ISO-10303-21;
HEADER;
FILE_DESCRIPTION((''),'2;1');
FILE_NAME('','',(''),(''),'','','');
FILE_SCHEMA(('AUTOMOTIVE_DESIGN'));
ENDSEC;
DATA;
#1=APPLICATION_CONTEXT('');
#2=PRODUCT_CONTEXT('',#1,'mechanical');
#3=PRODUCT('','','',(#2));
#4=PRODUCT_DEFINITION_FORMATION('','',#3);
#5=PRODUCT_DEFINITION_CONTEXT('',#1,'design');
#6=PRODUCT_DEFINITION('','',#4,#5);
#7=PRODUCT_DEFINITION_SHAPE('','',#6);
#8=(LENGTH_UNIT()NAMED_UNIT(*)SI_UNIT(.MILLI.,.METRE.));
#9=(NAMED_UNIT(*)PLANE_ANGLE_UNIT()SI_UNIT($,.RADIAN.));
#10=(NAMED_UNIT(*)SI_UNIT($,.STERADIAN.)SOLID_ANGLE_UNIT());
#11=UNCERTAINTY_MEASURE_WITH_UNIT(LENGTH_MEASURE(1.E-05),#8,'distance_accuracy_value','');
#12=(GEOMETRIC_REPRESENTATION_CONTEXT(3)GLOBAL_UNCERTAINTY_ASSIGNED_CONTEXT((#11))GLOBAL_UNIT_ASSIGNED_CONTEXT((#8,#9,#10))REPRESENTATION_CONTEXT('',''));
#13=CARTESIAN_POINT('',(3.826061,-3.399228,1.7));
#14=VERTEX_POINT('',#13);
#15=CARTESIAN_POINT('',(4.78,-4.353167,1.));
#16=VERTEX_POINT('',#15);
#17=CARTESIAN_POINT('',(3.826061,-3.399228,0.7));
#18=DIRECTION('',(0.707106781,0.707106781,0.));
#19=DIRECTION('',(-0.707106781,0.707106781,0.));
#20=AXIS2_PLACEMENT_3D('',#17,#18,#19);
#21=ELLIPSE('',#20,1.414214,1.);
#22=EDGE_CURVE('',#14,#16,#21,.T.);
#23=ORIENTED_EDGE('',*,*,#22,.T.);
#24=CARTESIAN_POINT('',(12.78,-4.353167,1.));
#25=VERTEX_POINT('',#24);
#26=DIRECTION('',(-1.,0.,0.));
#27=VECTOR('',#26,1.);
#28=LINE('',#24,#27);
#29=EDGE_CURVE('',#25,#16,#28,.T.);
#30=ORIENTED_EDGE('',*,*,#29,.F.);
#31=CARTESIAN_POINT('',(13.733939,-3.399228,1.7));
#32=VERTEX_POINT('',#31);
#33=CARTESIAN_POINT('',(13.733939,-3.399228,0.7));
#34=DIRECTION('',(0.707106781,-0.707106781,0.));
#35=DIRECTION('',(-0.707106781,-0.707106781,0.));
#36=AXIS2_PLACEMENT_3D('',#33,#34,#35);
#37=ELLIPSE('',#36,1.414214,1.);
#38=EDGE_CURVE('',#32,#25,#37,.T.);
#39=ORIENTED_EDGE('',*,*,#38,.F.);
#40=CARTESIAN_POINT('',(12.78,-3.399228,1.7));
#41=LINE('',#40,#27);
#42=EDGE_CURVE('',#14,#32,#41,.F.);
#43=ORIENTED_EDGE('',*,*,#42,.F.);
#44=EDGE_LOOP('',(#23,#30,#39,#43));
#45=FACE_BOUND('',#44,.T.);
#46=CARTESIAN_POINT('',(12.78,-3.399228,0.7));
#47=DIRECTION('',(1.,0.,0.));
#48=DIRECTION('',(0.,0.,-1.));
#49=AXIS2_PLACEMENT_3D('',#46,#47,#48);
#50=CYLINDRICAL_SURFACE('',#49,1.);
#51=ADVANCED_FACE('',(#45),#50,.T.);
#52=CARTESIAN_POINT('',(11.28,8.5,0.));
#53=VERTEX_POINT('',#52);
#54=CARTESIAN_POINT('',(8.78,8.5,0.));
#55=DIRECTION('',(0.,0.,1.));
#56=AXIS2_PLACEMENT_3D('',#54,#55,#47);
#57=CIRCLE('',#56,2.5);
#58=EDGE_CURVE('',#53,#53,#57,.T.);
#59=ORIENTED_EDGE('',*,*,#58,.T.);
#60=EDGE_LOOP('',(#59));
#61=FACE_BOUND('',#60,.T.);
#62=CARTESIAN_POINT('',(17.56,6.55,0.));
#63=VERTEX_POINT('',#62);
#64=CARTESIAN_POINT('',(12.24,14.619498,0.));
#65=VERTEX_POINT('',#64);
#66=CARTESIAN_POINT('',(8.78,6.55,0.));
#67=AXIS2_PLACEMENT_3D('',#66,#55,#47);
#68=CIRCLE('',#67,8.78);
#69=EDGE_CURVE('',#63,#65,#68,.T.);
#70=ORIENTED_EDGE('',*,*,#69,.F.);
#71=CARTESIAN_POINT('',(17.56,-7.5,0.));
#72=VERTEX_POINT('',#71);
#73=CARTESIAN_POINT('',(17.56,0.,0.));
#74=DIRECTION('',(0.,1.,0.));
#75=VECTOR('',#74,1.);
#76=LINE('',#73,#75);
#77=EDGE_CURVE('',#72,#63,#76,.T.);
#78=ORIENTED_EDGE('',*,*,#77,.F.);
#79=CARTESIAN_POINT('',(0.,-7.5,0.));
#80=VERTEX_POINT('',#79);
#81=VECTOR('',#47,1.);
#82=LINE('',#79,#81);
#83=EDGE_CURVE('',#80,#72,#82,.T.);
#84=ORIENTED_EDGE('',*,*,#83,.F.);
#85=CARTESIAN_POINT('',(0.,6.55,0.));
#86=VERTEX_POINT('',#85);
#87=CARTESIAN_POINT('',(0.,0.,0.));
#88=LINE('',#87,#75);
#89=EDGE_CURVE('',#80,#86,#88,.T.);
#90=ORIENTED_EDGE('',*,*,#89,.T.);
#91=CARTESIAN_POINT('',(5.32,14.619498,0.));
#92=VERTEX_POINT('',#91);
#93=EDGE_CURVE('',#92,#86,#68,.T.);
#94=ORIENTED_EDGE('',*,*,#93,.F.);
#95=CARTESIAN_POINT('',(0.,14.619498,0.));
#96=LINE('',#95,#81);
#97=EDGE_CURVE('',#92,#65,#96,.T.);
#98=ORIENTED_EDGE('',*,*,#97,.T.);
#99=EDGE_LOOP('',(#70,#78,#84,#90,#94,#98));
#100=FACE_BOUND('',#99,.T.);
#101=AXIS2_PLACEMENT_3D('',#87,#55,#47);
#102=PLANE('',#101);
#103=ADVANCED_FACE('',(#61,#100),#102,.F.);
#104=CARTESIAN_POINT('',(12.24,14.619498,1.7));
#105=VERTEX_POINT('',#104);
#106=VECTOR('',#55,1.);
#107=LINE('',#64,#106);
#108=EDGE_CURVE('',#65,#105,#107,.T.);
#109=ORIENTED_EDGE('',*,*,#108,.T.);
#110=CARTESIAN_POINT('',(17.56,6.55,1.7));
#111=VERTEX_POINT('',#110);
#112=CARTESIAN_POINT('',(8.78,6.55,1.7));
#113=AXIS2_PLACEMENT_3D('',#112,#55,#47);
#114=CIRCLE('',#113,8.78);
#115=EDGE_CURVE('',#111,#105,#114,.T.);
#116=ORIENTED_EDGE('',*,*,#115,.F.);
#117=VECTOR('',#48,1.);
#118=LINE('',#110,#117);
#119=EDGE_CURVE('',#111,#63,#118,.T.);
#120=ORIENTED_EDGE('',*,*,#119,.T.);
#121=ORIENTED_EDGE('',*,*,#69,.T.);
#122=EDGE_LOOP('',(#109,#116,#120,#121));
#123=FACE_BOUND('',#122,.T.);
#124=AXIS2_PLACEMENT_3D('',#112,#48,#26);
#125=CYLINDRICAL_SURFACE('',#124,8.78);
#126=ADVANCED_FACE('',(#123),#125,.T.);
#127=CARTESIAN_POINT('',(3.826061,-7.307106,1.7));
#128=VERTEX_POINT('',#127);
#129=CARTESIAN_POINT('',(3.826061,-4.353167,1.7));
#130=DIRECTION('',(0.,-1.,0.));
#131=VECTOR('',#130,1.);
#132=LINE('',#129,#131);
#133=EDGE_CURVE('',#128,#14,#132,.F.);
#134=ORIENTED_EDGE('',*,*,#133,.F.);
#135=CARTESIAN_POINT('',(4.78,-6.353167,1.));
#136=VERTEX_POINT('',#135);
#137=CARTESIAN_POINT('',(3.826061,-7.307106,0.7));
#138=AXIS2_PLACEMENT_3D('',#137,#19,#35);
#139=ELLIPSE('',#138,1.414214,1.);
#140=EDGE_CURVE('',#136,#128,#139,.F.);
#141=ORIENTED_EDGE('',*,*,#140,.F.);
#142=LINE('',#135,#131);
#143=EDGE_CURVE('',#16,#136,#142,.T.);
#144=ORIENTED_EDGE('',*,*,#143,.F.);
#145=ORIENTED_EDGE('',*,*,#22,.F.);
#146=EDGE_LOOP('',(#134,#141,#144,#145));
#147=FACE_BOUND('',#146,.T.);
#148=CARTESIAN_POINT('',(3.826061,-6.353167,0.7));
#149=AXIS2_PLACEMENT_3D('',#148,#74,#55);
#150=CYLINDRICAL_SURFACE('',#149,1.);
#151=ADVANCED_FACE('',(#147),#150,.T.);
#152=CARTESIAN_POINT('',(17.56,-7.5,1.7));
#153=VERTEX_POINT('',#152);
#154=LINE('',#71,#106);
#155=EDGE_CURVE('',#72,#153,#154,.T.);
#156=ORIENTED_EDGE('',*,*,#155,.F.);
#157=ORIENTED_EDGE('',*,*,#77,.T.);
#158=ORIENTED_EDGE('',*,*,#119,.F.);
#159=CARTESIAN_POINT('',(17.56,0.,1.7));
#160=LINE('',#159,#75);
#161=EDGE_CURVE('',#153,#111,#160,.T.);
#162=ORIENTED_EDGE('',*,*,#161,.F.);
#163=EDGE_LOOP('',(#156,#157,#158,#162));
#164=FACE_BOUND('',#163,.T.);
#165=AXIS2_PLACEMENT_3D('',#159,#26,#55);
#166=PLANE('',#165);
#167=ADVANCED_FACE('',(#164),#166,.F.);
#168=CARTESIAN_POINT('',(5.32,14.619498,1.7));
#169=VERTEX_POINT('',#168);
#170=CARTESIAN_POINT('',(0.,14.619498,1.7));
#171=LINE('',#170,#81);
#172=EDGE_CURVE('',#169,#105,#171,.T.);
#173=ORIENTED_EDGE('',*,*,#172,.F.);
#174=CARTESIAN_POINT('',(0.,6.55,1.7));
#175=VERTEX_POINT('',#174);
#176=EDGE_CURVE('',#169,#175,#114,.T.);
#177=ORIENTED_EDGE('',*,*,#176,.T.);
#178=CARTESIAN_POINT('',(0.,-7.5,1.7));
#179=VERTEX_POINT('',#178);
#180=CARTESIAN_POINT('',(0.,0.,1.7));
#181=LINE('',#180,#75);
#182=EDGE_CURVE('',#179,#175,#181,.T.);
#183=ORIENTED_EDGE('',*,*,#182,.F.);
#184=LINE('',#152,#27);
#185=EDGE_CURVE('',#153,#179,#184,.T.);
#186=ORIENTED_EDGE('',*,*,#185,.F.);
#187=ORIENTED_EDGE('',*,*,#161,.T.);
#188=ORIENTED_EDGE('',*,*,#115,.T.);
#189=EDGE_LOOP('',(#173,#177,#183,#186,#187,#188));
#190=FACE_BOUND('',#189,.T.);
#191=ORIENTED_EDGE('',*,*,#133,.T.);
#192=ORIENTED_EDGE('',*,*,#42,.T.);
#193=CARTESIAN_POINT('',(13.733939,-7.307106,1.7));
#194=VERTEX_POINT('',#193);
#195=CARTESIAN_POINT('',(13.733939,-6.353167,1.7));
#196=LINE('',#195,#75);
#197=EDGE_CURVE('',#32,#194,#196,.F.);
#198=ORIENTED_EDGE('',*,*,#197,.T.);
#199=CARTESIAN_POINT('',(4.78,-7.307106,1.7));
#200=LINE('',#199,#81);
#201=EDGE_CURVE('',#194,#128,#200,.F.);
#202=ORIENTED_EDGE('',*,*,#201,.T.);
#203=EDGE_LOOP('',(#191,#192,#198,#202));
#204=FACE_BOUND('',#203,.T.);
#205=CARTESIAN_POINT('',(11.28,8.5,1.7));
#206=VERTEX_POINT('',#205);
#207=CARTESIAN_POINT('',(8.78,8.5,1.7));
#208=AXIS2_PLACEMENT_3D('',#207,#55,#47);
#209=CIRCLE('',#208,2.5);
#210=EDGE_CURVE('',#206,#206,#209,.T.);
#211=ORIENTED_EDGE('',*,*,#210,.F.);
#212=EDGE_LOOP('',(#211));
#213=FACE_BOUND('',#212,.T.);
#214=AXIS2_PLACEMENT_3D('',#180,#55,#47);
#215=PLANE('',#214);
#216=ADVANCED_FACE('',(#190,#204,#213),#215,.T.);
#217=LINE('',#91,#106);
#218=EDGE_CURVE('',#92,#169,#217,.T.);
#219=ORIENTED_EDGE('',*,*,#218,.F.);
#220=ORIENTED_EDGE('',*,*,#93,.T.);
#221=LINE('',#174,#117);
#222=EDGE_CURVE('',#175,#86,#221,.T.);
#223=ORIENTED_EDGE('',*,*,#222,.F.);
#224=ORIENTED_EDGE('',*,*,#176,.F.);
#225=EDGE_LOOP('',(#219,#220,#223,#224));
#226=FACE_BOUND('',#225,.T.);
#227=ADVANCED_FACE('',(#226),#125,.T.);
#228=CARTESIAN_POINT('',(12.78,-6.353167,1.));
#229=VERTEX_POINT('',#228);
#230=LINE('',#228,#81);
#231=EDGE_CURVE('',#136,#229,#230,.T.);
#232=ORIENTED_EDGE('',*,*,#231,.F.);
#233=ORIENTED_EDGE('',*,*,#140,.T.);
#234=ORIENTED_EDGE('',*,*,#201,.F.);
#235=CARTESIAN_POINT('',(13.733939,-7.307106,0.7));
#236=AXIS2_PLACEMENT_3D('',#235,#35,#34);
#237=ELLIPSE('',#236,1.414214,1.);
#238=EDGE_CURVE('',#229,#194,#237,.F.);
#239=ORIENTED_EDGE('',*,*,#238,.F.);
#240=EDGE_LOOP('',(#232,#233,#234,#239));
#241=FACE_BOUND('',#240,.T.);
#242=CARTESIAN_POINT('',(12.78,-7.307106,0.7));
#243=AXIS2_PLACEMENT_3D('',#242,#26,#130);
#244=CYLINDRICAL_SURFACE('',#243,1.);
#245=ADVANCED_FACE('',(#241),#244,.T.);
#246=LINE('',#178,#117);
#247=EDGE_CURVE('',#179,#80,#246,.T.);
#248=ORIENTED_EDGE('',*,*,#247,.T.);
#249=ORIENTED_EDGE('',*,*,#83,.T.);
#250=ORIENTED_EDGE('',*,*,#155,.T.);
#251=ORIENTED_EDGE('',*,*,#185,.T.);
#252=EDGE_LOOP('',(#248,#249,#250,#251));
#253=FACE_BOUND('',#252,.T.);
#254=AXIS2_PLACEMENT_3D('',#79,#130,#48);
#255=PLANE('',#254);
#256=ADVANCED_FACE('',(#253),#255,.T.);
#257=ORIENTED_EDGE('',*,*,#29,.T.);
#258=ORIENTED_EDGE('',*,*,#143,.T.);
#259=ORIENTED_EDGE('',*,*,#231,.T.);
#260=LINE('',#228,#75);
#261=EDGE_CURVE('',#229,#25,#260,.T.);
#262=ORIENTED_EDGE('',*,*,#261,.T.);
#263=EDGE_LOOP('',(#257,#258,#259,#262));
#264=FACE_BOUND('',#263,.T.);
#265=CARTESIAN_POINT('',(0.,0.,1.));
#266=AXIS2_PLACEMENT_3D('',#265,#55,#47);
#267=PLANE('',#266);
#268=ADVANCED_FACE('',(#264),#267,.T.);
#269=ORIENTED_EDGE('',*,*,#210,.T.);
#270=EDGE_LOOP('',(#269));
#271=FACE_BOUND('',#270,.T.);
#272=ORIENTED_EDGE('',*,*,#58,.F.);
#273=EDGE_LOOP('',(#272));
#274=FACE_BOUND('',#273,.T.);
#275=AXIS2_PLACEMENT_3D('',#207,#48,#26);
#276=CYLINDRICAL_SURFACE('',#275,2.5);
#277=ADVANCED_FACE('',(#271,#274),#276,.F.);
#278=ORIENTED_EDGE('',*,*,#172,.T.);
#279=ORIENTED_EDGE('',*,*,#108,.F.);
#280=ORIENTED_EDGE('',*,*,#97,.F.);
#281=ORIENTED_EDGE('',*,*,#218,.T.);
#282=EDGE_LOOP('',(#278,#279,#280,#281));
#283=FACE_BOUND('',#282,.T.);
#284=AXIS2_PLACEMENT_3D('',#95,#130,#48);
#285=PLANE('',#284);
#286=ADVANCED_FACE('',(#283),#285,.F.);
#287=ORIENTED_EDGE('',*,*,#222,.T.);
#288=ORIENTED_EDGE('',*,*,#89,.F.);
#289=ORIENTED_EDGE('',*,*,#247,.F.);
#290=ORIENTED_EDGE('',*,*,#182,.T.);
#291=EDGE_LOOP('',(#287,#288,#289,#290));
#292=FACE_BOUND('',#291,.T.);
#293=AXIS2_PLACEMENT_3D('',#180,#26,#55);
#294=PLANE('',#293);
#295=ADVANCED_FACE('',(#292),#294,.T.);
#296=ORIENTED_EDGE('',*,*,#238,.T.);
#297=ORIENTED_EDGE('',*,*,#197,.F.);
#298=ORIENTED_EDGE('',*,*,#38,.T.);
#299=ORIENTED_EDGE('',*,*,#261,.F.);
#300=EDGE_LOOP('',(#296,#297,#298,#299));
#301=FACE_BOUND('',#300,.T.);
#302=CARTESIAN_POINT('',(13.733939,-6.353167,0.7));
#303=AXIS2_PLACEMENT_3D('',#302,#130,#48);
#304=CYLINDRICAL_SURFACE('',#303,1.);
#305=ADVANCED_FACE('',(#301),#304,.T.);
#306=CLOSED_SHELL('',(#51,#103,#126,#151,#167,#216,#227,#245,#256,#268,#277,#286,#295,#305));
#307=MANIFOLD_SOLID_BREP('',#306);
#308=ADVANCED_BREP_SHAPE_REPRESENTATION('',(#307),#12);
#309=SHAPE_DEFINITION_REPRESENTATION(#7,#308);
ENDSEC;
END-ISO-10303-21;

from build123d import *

# Parameters (mm, degrees)
SKETCH1_R           = 2.5
BOSS_EXTRUDE1_DEPTH = 1.7
CUT_EXTRUDE4_DEPTH  = 24.372045268
SKETCH6_W           = 17.56
SKETCH6_H           = 1.7
BOSS_EXTRUDE4_DEPTH = 7.5
SKETCH9_W           = 8
SKETCH9_H           = 2
CUT_EXTRUDE2_DEPTH  = 0.7
FILLET1_R           = 1


with BuildPart() as part:
    # Sketch1 → Boss-Extrude1 (new body)
    with BuildSketch(Plane.XY):
        with BuildLine():
            Line((0, 0), (17.56, 0))
            Line((17.56, 0), (17.56, 6.55))
            ThreePointArc((17.56, 6.55), (8.78, 15.33), (0, 6.55))
            Line((0, 6.55), (0, 0))
        make_face()
        with Locations((8.78, 8.5)):
            Circle(SKETCH1_R, mode=Mode.SUBTRACT)
    extrude(amount=BOSS_EXTRUDE1_DEPTH)

    # Sketch3 → Cut-Extrude4 (cut, through all)
    with BuildSketch(Plane.XY.offset(1.7)):
        with BuildLine():
            ThreePointArc((12.24, 14.619498126), (8.78, 15.33), (5.32, 14.619498126))
            Line((5.32, 14.619498126), (12.24, 14.619498126))
        make_face()
    extrude(amount=-CUT_EXTRUDE4_DEPTH, mode=Mode.SUBTRACT)

    # Sketch6 → Boss-Extrude4 (add)
    with BuildSketch(Plane.XZ):
        with Locations((8.78, 0.85)):
            Rectangle(SKETCH6_W, SKETCH6_H)
    extrude(amount=BOSS_EXTRUDE4_DEPTH)

    # Sketch9 → Cut-Extrude2 (cut)
    with BuildSketch(Plane.XY.offset(1.7)):
        with Locations((8.78, -5.353166831)):
            Rectangle(SKETCH9_W, SKETCH9_H)
    extrude(amount=-CUT_EXTRUDE2_DEPTH, mode=Mode.SUBTRACT)

    # Fillet1
    # the kernel refuses this fillet: 1 mm, written as the material it takes off along each edge
    with BuildSketch(Plane(origin=(12.78, -4.353166831, 1.7), x_dir=(1, 0, 0), z_dir=(0, -1, 0)), Plane(origin=(4.78, -6.353166831, 1.7), x_dir=(-1, 0, 0), z_dir=(0, 1, 0))) as fillet1_piece_1:
        with BuildLine():
            CenterArc((0.953939201, -1), FILLET1_R, 90, 72.542396876)
            Line((0, -0.7), (-0.019078784, -0.694))
            ThreePointArc((-0.019078784, -0.694), (-0.02, -0.35), (-0.02, 0))
            Line((-0.02, 0), (0, 0.02))
            Line((0, 0.02), (0.953939201, 0.02))
            Line((0.953939201, 0.02), (0.953939201, 0))
        make_face()
    extrude(amount=2, mode=Mode.SUBTRACT)
    with BuildSketch(Plane(origin=(12.78, -6.353166831, 1.7), x_dir=(0, -1, 0), z_dir=(-1, 0, 0)), Plane(origin=(4.78, -4.353166831, 1.7), x_dir=(0, 1, 0), z_dir=(1, 0, 0))) as fillet1_piece_2:
        with BuildLine():
            CenterArc((0.953939201, -1), FILLET1_R, 90, 72.542396876)
            Line((0, -0.7), (-0.019078784, -0.694))
            ThreePointArc((-0.019078784, -0.694), (-0.02, -0.35), (-0.02, 0))
            Line((-0.02, 0), (0, 0.02))
            Line((0, 0.02), (0.953939201, 0.02))
            Line((0.953939201, 0.02), (0.953939201, 0))
        make_face()
    extrude(amount=8, mode=Mode.SUBTRACT)
    with BuildSketch(Plane(origin=(12.78, -1.968318828, 1.7), x_dir=(1, 0, 0), z_dir=(0, -1, 0))) as fillet1_piece_3a_section:
        with BuildLine():
            CenterArc((0.953939201, -1), FILLET1_R, 90, 72.542396876)
            Line((0, -0.7), (-0.019078784, -0.694))
            ThreePointArc((-0.019078784, -0.694), (-0.02, -0.35), (-0.02, 0))
            Line((-0.02, 0), (0, 0.02))
            Line((0, 0.02), (0.953939201, 0.02))
            Line((0.953939201, 0.02), (0.953939201, 0))
        make_face()
    fillet1_piece_3a = extrude(amount=4.384848004, mode=Mode.PRIVATE)
    fillet1_piece_3a = split(fillet1_piece_3a, bisect_by=Plane(origin=(13.007122588, -4.353166831, 1.5212182), z_dir=(0, 1, 0)), keep=Keep.TOP, mode=Mode.PRIVATE)
    with BuildSketch(Plane(origin=(4.78, -4.353166831, 1.7), x_dir=(0, 1, 0), z_dir=(1, 0, 0))) as fillet1_piece_3b_section:
        with BuildLine():
            CenterArc((0.953939201, -1), FILLET1_R, 90, 72.542396876)
            Line((0, -0.7), (-0.019078784, -0.694))
            ThreePointArc((-0.019078784, -0.694), (-0.02, -0.35), (-0.02, 0))
            Line((-0.02, 0), (0, 0.02))
            Line((0, 0.02), (0.953939201, 0.02))
            Line((0.953939201, 0.02), (0.953939201, 0))
        make_face()
    fillet1_piece_3b = extrude(amount=10.384848004, mode=Mode.PRIVATE)
    fillet1_piece_3b = split(fillet1_piece_3b, bisect_by=Plane(origin=(12.78, -4.126044244, 1.5212182), z_dir=(1, 0, 0)), keep=Keep.TOP, mode=Mode.PRIVATE)
    fillet1_piece_3 = fillet1_piece_3a & fillet1_piece_3b
    add(fillet1_piece_3, mode=Mode.SUBTRACT)
    with BuildSketch(Plane(origin=(12.78, -4.353166831, 1.7), x_dir=(1, 0, 0), z_dir=(0, -1, 0))) as fillet1_piece_4a_section:
        with BuildLine():
            CenterArc((0.953939201, -1), FILLET1_R, 90, 72.542396876)
            Line((0, -0.7), (-0.019078784, -0.694))
            ThreePointArc((-0.019078784, -0.694), (-0.02, -0.35), (-0.02, 0))
            Line((-0.02, 0), (0, 0.02))
            Line((0, 0.02), (0.953939201, 0.02))
            Line((0.953939201, 0.02), (0.953939201, 0))
        make_face()
    fillet1_piece_4a = extrude(amount=4.384848004, mode=Mode.PRIVATE)
    fillet1_piece_4a = split(fillet1_piece_4a, bisect_by=Plane(origin=(13.007122588, -6.353166831, 1.5212182), z_dir=(0, -1, 0)), keep=Keep.TOP, mode=Mode.PRIVATE)
    with BuildSketch(Plane(origin=(15.164848004, -6.353166831, 1.7), x_dir=(0, -1, 0), z_dir=(-1, 0, 0))) as fillet1_piece_4b_section:
        with BuildLine():
            CenterArc((0.953939201, -1), FILLET1_R, 90, 72.542396876)
            Line((0, -0.7), (-0.019078784, -0.694))
            ThreePointArc((-0.019078784, -0.694), (-0.02, -0.35), (-0.02, 0))
            Line((-0.02, 0), (0, 0.02))
            Line((0, 0.02), (0.953939201, 0.02))
            Line((0.953939201, 0.02), (0.953939201, 0))
        make_face()
    fillet1_piece_4b = extrude(amount=10.384848004, mode=Mode.PRIVATE)
    fillet1_piece_4b = split(fillet1_piece_4b, bisect_by=Plane(origin=(12.78, -6.580289419, 1.5212182), z_dir=(1, 0, 0)), keep=Keep.TOP, mode=Mode.PRIVATE)
    fillet1_piece_4 = fillet1_piece_4a & fillet1_piece_4b
    add(fillet1_piece_4, mode=Mode.SUBTRACT)
    with BuildSketch(Plane(origin=(4.78, -8.738014835, 1.7), x_dir=(-1, 0, 0), z_dir=(0, 1, 0))) as fillet1_piece_5a_section:
        with BuildLine():
            CenterArc((0.953939201, -1), FILLET1_R, 90, 72.542396876)
            Line((0, -0.7), (-0.019078784, -0.694))
            ThreePointArc((-0.019078784, -0.694), (-0.02, -0.35), (-0.02, 0))
            Line((-0.02, 0), (0, 0.02))
            Line((0, 0.02), (0.953939201, 0.02))
            Line((0.953939201, 0.02), (0.953939201, 0))
        make_face()
    fillet1_piece_5a = extrude(amount=4.384848004, mode=Mode.PRIVATE)
    fillet1_piece_5a = split(fillet1_piece_5a, bisect_by=Plane(origin=(4.552877412, -6.353166831, 1.5212182), z_dir=(0, -1, 0)), keep=Keep.TOP, mode=Mode.PRIVATE)
    with BuildSketch(Plane(origin=(12.78, -6.353166831, 1.7), x_dir=(0, -1, 0), z_dir=(-1, 0, 0))) as fillet1_piece_5b_section:
        with BuildLine():
            CenterArc((0.953939201, -1), FILLET1_R, 90, 72.542396876)
            Line((0, -0.7), (-0.019078784, -0.694))
            ThreePointArc((-0.019078784, -0.694), (-0.02, -0.35), (-0.02, 0))
            Line((-0.02, 0), (0, 0.02))
            Line((0, 0.02), (0.953939201, 0.02))
            Line((0.953939201, 0.02), (0.953939201, 0))
        make_face()
    fillet1_piece_5b = extrude(amount=10.384848004, mode=Mode.PRIVATE)
    fillet1_piece_5b = split(fillet1_piece_5b, bisect_by=Plane(origin=(4.78, -6.580289419, 1.5212182), z_dir=(-1, 0, 0)), keep=Keep.TOP, mode=Mode.PRIVATE)
    fillet1_piece_5 = fillet1_piece_5a & fillet1_piece_5b
    add(fillet1_piece_5, mode=Mode.SUBTRACT)
    with BuildSketch(Plane(origin=(2.395151996, -4.353166831, 1.7), x_dir=(0, 1, 0), z_dir=(1, 0, 0))) as fillet1_piece_6a_section:
        with BuildLine():
            CenterArc((0.953939201, -1), FILLET1_R, 90, 72.542396876)
            Line((0, -0.7), (-0.019078784, -0.694))
            ThreePointArc((-0.019078784, -0.694), (-0.02, -0.35), (-0.02, 0))
            Line((-0.02, 0), (0, 0.02))
            Line((0, 0.02), (0.953939201, 0.02))
            Line((0.953939201, 0.02), (0.953939201, 0))
        make_face()
    fillet1_piece_6a = extrude(amount=10.384848004, mode=Mode.PRIVATE)
    fillet1_piece_6a = split(fillet1_piece_6a, bisect_by=Plane(origin=(4.78, -4.126044244, 1.5212182), z_dir=(-1, 0, 0)), keep=Keep.TOP, mode=Mode.PRIVATE)
    with BuildSketch(Plane(origin=(4.78, -6.353166831, 1.7), x_dir=(-1, 0, 0), z_dir=(0, 1, 0))) as fillet1_piece_6b_section:
        with BuildLine():
            CenterArc((0.953939201, -1), FILLET1_R, 90, 72.542396876)
            Line((0, -0.7), (-0.019078784, -0.694))
            ThreePointArc((-0.019078784, -0.694), (-0.02, -0.35), (-0.02, 0))
            Line((-0.02, 0), (0, 0.02))
            Line((0, 0.02), (0.953939201, 0.02))
            Line((0.953939201, 0.02), (0.953939201, 0))
        make_face()
    fillet1_piece_6b = extrude(amount=4.384848004, mode=Mode.PRIVATE)
    fillet1_piece_6b = split(fillet1_piece_6b, bisect_by=Plane(origin=(4.552877412, -4.353166831, 1.5212182), z_dir=(0, 1, 0)), keep=Keep.TOP, mode=Mode.PRIVATE)
    fillet1_piece_6 = fillet1_piece_6a & fillet1_piece_6b
    add(fillet1_piece_6, mode=Mode.SUBTRACT)


solid = part.part
